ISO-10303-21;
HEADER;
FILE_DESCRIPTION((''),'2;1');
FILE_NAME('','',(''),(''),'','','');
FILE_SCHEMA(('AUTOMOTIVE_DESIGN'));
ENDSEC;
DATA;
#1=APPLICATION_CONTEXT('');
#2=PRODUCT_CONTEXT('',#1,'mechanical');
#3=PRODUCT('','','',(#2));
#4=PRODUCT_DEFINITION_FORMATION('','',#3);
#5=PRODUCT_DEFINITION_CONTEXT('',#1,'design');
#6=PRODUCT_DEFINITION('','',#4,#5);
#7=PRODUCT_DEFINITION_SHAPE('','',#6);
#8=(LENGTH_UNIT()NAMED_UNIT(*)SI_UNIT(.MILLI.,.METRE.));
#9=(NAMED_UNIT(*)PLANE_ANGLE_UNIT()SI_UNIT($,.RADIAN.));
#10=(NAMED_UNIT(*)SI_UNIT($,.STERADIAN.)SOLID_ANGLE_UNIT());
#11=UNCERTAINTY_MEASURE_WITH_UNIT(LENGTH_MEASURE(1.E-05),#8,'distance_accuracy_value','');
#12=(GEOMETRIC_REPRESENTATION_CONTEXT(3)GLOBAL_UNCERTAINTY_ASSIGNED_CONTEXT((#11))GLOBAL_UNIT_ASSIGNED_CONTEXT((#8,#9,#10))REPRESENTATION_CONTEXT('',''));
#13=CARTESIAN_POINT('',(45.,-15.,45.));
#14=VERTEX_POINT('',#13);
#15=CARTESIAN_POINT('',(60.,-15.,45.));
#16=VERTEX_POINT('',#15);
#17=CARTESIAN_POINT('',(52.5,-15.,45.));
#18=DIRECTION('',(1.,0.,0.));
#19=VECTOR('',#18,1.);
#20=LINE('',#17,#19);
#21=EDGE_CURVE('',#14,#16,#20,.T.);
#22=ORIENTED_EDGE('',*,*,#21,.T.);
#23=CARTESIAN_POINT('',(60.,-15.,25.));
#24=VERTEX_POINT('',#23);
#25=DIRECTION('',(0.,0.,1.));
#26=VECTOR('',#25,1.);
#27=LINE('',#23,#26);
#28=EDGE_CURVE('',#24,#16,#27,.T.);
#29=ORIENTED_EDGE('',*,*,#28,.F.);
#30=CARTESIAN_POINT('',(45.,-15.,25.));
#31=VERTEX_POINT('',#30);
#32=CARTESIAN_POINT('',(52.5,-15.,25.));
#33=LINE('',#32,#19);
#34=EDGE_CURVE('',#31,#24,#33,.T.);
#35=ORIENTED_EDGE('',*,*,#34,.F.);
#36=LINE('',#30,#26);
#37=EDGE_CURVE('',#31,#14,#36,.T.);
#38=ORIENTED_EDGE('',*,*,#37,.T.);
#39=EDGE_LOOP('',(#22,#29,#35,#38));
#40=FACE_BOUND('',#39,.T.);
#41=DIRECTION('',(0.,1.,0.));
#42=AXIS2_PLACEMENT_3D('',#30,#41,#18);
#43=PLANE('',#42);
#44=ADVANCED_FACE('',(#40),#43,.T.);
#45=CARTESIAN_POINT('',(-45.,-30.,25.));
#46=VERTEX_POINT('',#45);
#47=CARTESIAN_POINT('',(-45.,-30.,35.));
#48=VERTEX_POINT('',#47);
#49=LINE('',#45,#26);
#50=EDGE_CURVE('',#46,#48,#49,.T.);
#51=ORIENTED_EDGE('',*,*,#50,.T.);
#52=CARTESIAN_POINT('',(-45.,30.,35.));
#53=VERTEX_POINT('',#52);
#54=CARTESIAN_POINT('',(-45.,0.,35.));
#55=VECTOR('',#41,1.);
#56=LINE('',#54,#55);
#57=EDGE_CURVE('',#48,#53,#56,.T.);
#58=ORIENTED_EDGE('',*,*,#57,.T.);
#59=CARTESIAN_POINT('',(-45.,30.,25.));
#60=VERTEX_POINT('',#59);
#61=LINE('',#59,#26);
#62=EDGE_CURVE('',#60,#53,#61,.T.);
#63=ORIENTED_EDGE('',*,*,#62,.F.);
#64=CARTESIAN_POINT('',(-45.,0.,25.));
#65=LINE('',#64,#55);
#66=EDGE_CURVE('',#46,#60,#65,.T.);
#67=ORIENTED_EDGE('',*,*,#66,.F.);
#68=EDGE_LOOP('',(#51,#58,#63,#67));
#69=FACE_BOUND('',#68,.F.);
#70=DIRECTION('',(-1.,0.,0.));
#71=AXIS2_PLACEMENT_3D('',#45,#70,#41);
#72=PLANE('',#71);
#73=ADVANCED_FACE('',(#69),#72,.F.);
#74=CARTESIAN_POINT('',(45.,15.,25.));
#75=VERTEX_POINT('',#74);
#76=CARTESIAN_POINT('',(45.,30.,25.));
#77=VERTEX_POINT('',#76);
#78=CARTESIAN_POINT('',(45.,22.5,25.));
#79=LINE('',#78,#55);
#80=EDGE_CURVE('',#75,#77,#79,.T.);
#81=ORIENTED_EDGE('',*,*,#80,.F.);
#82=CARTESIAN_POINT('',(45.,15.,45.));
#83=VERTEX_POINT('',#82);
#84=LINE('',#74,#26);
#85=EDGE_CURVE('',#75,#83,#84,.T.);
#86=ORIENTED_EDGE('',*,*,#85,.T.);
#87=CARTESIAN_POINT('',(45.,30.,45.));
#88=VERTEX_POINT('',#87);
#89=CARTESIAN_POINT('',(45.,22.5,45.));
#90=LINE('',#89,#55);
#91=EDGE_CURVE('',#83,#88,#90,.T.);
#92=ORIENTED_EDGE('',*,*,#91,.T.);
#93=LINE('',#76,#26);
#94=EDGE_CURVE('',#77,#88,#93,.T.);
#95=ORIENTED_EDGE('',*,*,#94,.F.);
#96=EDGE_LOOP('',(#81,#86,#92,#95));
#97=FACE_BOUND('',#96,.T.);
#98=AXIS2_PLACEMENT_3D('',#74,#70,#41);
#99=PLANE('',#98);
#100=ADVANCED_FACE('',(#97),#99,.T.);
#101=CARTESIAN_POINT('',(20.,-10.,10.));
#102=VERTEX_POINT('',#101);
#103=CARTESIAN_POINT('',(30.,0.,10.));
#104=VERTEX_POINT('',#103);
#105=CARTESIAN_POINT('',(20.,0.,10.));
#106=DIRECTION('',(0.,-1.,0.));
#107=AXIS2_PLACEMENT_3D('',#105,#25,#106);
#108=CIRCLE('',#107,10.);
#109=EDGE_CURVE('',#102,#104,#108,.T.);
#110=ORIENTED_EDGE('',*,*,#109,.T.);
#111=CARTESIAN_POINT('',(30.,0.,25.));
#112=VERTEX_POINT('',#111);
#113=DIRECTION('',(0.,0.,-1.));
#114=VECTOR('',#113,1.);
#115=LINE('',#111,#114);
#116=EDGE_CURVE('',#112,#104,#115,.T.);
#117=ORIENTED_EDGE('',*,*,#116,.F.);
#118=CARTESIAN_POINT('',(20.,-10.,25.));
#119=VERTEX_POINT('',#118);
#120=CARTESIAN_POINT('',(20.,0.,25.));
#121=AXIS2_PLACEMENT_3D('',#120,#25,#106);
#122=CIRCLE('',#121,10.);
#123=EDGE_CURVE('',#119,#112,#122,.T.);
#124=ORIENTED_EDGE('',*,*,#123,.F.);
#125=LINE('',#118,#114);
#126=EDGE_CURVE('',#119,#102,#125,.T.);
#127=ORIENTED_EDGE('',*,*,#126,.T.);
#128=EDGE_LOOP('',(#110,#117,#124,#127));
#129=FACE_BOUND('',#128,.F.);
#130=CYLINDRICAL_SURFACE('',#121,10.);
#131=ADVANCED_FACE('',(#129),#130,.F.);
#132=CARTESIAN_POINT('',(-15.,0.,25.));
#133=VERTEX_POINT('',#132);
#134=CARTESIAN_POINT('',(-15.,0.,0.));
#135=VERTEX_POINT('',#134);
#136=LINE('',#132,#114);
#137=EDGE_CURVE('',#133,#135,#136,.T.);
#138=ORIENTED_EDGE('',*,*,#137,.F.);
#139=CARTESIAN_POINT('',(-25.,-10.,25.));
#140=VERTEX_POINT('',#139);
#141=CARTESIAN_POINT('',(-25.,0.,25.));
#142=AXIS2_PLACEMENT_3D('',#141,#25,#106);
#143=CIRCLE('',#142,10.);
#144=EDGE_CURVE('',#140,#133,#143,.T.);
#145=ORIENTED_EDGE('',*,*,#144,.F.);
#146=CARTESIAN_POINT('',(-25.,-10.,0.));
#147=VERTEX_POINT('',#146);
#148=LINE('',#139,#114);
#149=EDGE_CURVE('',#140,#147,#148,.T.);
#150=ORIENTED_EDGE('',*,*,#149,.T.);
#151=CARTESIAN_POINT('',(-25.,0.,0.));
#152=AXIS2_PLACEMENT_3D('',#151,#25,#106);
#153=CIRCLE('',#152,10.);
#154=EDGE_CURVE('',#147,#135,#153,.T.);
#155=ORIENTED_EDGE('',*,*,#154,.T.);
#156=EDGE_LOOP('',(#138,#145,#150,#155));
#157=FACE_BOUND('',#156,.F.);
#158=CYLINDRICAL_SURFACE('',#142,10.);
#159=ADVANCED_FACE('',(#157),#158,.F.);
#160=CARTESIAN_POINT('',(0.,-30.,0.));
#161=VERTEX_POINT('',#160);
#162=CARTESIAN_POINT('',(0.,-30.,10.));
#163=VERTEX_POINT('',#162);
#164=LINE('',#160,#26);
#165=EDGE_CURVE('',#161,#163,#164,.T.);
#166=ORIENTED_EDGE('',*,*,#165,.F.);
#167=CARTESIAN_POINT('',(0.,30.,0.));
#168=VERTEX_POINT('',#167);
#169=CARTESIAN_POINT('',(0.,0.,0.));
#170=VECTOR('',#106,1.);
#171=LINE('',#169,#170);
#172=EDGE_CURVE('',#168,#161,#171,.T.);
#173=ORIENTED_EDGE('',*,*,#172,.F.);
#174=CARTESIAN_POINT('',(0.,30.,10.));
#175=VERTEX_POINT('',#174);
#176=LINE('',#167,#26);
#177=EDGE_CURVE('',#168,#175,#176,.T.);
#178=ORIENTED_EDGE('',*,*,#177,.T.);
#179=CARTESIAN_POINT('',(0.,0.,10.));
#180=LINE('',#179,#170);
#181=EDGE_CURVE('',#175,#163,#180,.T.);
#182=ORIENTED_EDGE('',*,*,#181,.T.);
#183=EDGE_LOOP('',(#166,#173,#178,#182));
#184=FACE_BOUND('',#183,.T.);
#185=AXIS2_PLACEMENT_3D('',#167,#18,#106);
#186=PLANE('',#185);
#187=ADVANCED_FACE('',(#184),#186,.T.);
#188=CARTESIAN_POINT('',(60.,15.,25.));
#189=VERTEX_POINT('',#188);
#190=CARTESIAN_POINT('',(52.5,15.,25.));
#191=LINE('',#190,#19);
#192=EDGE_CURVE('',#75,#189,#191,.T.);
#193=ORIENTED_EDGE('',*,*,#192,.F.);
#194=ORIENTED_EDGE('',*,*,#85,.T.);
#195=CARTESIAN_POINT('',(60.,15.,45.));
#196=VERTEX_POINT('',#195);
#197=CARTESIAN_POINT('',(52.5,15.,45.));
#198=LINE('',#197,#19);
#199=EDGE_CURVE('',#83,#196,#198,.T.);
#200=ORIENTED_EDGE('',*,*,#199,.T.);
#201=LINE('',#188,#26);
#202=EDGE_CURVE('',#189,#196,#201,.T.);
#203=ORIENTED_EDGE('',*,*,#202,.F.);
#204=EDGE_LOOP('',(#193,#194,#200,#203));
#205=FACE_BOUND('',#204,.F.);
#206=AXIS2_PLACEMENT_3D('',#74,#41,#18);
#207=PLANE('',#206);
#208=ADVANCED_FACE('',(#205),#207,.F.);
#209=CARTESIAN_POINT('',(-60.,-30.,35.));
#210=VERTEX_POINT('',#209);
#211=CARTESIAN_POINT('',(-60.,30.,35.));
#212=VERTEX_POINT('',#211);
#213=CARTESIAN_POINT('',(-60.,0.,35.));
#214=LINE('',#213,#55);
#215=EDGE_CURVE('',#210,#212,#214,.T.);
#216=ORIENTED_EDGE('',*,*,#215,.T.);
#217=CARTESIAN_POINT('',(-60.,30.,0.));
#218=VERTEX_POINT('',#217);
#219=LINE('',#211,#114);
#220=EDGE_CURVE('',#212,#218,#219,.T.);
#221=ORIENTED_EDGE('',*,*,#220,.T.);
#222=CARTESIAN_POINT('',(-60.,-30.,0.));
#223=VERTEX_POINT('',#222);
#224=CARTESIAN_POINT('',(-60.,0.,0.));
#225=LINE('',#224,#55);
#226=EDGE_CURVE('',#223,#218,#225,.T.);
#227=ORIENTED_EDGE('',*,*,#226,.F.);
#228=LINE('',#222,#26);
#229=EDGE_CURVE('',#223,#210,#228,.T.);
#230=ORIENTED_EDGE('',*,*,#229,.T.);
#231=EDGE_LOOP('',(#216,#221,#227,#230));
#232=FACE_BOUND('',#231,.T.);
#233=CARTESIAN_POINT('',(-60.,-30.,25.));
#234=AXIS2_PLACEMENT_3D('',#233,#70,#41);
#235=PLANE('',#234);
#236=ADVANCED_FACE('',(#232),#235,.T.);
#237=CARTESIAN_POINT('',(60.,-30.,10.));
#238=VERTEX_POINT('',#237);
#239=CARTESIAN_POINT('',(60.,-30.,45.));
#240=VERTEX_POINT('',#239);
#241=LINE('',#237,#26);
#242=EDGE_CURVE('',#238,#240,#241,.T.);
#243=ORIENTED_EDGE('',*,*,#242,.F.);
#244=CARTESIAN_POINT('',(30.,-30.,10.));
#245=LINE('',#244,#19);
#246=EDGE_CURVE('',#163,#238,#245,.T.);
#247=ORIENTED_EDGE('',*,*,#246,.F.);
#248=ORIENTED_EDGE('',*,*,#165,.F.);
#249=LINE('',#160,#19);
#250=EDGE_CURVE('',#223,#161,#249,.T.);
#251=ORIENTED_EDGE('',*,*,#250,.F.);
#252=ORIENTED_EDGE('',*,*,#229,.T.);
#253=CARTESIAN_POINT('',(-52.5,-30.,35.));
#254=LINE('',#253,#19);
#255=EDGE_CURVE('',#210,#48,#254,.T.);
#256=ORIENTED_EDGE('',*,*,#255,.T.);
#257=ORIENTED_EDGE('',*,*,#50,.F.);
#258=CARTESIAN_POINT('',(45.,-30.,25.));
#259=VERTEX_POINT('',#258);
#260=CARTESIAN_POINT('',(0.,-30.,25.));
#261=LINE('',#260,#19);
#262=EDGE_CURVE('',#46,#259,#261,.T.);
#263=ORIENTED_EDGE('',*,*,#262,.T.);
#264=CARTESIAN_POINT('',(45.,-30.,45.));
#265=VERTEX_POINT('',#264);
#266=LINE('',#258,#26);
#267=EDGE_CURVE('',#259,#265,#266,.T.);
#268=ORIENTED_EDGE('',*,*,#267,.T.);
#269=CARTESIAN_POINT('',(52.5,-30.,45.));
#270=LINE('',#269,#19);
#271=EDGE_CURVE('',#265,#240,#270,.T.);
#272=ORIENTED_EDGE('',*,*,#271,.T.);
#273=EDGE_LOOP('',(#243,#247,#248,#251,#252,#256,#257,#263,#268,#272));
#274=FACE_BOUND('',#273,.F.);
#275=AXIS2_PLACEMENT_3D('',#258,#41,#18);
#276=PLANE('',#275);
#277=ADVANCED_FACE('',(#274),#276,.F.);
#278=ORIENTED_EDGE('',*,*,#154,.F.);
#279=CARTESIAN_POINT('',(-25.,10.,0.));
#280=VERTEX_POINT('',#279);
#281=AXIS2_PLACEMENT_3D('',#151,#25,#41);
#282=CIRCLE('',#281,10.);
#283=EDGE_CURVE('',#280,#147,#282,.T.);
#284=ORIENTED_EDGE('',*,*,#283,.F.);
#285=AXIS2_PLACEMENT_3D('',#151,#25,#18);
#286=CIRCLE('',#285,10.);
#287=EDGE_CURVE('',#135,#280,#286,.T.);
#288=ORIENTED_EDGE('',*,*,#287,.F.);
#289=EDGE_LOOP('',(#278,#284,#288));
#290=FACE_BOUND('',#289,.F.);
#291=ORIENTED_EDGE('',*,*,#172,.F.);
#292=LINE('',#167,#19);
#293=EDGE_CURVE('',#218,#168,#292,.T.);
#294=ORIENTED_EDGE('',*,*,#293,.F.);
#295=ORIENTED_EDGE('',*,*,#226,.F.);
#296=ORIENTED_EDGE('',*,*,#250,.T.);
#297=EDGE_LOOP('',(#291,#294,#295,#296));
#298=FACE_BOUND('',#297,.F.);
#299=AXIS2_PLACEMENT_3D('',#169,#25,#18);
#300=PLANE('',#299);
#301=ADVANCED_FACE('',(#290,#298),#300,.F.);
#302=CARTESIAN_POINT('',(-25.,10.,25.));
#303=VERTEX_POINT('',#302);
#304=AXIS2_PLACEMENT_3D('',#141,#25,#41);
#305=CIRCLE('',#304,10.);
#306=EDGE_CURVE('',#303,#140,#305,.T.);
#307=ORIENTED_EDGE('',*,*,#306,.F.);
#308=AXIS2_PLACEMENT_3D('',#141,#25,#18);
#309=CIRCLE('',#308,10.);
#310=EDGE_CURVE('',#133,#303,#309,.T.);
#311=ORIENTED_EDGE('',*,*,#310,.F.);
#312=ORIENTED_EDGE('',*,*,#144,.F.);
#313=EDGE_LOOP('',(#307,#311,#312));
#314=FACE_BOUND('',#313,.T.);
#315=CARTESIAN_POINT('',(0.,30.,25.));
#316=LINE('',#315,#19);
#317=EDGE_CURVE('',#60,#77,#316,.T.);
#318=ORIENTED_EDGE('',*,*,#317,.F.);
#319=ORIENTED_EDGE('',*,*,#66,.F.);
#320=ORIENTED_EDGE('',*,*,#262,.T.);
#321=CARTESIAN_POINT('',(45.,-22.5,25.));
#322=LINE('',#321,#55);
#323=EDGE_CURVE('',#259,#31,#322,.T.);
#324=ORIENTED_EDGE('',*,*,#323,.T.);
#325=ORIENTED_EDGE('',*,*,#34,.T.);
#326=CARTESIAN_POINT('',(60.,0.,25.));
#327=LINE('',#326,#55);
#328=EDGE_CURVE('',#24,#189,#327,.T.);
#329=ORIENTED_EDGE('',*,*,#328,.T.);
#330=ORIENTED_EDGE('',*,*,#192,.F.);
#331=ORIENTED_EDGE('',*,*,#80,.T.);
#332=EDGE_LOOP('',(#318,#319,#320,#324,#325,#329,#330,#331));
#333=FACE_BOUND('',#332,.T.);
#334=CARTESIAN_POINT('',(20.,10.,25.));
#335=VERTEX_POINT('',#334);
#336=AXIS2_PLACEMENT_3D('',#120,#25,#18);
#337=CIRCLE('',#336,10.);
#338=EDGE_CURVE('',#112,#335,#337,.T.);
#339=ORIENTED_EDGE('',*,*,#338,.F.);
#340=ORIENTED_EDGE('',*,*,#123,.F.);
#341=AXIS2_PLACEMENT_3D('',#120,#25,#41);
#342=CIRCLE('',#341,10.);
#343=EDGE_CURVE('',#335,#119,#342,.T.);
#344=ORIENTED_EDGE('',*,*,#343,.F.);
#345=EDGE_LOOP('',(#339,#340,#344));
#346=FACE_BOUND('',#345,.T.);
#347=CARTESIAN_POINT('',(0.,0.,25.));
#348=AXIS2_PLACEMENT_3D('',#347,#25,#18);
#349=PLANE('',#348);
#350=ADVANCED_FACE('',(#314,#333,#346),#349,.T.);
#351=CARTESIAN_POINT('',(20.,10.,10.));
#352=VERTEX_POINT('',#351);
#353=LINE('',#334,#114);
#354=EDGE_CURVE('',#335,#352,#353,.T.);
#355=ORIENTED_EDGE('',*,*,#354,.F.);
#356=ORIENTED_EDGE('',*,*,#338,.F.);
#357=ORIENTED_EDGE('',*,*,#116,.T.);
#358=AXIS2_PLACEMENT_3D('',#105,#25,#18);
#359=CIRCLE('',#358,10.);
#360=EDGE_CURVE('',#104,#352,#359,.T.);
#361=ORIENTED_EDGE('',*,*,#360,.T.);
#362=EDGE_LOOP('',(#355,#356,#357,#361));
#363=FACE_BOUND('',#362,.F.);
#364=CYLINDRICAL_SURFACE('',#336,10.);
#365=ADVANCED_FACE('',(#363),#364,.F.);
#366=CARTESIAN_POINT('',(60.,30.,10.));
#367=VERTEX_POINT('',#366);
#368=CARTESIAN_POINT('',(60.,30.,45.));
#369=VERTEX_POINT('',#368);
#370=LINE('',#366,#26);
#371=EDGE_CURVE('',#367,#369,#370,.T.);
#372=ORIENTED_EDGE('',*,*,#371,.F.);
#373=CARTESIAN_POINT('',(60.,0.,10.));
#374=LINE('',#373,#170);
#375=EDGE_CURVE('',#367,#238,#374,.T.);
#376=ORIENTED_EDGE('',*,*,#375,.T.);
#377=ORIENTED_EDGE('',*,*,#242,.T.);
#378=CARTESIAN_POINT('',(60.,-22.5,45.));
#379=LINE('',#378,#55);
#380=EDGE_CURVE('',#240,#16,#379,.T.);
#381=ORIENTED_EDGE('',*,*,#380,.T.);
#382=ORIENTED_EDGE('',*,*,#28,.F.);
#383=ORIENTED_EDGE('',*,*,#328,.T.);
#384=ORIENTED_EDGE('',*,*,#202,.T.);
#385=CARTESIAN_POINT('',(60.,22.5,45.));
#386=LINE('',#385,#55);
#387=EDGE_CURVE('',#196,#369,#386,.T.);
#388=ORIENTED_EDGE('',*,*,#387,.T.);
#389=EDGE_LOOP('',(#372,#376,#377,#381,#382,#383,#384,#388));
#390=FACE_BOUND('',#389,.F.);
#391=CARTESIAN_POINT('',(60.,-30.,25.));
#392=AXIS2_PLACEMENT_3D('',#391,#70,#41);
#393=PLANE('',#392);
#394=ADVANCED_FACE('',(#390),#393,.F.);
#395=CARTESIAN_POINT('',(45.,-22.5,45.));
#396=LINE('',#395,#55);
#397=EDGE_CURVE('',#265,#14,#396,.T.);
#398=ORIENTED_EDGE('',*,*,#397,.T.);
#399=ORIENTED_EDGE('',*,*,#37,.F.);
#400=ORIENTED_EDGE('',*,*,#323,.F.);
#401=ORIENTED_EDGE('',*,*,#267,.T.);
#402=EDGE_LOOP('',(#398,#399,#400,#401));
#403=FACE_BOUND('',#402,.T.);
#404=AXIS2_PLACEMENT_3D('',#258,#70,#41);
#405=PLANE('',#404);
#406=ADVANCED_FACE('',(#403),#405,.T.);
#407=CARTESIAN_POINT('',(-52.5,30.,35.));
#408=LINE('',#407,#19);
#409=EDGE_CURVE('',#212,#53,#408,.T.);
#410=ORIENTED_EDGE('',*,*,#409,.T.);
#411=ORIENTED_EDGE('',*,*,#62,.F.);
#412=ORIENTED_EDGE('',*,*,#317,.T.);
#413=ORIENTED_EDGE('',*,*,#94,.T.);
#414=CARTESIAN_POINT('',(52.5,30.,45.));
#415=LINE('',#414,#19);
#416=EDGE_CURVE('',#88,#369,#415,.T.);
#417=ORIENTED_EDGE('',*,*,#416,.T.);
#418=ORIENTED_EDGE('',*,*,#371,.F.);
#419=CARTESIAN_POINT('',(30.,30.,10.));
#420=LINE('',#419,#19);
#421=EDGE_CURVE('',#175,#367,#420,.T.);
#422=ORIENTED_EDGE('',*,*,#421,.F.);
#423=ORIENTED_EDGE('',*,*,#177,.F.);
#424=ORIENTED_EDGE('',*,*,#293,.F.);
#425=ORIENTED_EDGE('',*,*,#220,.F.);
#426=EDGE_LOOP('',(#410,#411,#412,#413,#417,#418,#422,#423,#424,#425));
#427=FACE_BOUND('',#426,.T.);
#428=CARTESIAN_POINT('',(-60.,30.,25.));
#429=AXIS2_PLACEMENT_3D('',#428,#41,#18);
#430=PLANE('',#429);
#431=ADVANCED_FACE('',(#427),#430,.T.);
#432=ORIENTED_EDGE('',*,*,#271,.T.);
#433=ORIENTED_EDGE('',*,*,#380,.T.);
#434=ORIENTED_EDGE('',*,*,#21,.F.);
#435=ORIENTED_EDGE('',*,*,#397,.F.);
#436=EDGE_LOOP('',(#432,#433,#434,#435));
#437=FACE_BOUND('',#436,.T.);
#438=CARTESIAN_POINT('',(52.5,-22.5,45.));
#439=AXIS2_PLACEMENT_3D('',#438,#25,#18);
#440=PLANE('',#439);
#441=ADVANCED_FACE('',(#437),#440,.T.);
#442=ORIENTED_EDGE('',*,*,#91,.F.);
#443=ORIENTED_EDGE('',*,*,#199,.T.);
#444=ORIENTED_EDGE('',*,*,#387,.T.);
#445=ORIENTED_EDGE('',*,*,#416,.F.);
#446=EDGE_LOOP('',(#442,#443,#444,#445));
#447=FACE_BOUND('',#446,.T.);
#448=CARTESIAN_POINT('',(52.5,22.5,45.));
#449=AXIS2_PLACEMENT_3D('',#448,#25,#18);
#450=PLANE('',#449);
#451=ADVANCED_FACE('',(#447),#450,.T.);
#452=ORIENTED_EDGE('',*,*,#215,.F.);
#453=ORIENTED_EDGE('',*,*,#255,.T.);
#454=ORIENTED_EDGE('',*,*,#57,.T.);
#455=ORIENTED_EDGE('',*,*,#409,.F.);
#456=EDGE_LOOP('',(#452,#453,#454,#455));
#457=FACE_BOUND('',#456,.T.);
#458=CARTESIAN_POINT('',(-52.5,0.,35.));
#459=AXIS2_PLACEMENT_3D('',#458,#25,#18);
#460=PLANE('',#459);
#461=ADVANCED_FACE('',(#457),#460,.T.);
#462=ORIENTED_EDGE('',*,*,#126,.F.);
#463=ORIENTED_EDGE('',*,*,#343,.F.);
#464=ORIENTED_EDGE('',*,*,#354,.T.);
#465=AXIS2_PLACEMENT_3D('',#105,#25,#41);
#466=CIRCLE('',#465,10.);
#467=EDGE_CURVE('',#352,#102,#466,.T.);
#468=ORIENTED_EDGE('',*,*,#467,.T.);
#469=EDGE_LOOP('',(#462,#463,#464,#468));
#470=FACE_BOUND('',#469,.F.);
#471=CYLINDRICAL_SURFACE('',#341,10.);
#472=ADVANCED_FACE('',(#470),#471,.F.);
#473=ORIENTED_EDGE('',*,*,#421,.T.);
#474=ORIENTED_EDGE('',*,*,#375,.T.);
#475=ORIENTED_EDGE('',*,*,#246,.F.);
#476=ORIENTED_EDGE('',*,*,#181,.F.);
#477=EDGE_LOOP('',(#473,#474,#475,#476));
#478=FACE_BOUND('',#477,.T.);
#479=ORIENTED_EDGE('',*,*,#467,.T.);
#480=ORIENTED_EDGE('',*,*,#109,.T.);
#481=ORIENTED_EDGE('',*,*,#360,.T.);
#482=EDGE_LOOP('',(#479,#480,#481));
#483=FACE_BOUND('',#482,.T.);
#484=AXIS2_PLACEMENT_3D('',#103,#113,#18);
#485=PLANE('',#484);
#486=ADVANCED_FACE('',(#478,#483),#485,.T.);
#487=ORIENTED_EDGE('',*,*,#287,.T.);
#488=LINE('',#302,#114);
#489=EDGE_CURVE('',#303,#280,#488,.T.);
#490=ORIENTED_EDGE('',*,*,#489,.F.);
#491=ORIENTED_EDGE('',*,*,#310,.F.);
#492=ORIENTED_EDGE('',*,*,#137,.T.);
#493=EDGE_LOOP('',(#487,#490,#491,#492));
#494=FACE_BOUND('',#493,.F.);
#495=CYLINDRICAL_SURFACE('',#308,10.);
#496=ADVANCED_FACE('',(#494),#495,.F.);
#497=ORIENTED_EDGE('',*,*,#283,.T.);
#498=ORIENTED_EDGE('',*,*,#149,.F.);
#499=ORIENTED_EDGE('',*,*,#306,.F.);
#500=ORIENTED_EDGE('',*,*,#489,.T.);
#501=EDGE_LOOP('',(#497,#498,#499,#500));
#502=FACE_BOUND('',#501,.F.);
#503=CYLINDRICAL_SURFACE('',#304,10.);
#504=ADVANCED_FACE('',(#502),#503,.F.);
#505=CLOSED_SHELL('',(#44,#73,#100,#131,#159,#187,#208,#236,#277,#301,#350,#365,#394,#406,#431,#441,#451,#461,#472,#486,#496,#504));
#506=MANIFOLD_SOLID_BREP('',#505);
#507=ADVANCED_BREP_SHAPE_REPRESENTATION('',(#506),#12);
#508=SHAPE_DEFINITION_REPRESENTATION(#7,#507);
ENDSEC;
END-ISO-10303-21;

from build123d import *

# Parameters (mm, degrees)
F0_W     = 120
F0_H     = 60
F1_DEPTH = 25
F2_W     = 60
F2_H     = 60
F3_DEPTH = 10
F4_W     = 15
F4_H     = 60
F5_DEPTH = 10
F6_W     = 15
F6_H     = 15
F7_DEPTH = 20
F9_DEPTH = 25.001


with BuildPart() as f1:
    # F0 (on Top) → F1 (new body)
    with BuildSketch(Plane.XY):
        Rectangle(F0_W, F0_H)
    extrude(amount=F1_DEPTH)

    # F2 (on face) → F3 (cut)
    with BuildSketch(Plane(origin=(0, 0, 0), x_dir=(1, 0, 0), z_dir=(0, 0, -1))):
        with Locations((30, 0)):
            Rectangle(F2_W, F2_H)
    extrude(amount=-F3_DEPTH, mode=Mode.SUBTRACT)

    # F4 (on face) → F5 (join)
    with BuildSketch(Plane.XY.offset(25)):
        with Locations((-52.5, 0)):
            Rectangle(F4_W, F4_H)
    extrude(amount=F5_DEPTH)

    # F6 (on face) → F7 (join)
    with BuildSketch(Plane.XY.offset(25)):
        with Locations((52.5, -22.5)):
            Rectangle(F6_W, F6_H)
        with Locations((52.5, 22.5)):
            Rectangle(F6_W, F6_H)
    extrude(amount=F7_DEPTH)

    # F8 (on face) → F9 (cut, through all)
    with BuildSketch(Plane.XY.offset(25)):
        with BuildLine():
            Line((-25, 10), (-25, -10))
            ThreePointArc((-25, -10), (-17.9289321881, -7.0710678119), (-15, 0))
            ThreePointArc((-15, 0), (-17.9289321881, 7.0710678119), (-25, 10))
        make_face()
        with BuildLine():
            ThreePointArc((-25, 10), (-35, 0), (-25, -10))
            Line((-25, -10), (-25, 10))
        make_face()
        with BuildLine():
            ThreePointArc((20, 10), (10, 0), (20, -10))
            Line((20, -10), (20, 10))
        make_face()
        with BuildLine():
            Line((20, 10), (20, -10))
            ThreePointArc((20, -10), (27.0710678119, -7.0710678119), (30, 0))
            ThreePointArc((30, 0), (27.0710678119, 7.0710678119), (20, 10))
        make_face()
    extrude(amount=-F9_DEPTH, mode=Mode.SUBTRACT)


solid = f1.part
